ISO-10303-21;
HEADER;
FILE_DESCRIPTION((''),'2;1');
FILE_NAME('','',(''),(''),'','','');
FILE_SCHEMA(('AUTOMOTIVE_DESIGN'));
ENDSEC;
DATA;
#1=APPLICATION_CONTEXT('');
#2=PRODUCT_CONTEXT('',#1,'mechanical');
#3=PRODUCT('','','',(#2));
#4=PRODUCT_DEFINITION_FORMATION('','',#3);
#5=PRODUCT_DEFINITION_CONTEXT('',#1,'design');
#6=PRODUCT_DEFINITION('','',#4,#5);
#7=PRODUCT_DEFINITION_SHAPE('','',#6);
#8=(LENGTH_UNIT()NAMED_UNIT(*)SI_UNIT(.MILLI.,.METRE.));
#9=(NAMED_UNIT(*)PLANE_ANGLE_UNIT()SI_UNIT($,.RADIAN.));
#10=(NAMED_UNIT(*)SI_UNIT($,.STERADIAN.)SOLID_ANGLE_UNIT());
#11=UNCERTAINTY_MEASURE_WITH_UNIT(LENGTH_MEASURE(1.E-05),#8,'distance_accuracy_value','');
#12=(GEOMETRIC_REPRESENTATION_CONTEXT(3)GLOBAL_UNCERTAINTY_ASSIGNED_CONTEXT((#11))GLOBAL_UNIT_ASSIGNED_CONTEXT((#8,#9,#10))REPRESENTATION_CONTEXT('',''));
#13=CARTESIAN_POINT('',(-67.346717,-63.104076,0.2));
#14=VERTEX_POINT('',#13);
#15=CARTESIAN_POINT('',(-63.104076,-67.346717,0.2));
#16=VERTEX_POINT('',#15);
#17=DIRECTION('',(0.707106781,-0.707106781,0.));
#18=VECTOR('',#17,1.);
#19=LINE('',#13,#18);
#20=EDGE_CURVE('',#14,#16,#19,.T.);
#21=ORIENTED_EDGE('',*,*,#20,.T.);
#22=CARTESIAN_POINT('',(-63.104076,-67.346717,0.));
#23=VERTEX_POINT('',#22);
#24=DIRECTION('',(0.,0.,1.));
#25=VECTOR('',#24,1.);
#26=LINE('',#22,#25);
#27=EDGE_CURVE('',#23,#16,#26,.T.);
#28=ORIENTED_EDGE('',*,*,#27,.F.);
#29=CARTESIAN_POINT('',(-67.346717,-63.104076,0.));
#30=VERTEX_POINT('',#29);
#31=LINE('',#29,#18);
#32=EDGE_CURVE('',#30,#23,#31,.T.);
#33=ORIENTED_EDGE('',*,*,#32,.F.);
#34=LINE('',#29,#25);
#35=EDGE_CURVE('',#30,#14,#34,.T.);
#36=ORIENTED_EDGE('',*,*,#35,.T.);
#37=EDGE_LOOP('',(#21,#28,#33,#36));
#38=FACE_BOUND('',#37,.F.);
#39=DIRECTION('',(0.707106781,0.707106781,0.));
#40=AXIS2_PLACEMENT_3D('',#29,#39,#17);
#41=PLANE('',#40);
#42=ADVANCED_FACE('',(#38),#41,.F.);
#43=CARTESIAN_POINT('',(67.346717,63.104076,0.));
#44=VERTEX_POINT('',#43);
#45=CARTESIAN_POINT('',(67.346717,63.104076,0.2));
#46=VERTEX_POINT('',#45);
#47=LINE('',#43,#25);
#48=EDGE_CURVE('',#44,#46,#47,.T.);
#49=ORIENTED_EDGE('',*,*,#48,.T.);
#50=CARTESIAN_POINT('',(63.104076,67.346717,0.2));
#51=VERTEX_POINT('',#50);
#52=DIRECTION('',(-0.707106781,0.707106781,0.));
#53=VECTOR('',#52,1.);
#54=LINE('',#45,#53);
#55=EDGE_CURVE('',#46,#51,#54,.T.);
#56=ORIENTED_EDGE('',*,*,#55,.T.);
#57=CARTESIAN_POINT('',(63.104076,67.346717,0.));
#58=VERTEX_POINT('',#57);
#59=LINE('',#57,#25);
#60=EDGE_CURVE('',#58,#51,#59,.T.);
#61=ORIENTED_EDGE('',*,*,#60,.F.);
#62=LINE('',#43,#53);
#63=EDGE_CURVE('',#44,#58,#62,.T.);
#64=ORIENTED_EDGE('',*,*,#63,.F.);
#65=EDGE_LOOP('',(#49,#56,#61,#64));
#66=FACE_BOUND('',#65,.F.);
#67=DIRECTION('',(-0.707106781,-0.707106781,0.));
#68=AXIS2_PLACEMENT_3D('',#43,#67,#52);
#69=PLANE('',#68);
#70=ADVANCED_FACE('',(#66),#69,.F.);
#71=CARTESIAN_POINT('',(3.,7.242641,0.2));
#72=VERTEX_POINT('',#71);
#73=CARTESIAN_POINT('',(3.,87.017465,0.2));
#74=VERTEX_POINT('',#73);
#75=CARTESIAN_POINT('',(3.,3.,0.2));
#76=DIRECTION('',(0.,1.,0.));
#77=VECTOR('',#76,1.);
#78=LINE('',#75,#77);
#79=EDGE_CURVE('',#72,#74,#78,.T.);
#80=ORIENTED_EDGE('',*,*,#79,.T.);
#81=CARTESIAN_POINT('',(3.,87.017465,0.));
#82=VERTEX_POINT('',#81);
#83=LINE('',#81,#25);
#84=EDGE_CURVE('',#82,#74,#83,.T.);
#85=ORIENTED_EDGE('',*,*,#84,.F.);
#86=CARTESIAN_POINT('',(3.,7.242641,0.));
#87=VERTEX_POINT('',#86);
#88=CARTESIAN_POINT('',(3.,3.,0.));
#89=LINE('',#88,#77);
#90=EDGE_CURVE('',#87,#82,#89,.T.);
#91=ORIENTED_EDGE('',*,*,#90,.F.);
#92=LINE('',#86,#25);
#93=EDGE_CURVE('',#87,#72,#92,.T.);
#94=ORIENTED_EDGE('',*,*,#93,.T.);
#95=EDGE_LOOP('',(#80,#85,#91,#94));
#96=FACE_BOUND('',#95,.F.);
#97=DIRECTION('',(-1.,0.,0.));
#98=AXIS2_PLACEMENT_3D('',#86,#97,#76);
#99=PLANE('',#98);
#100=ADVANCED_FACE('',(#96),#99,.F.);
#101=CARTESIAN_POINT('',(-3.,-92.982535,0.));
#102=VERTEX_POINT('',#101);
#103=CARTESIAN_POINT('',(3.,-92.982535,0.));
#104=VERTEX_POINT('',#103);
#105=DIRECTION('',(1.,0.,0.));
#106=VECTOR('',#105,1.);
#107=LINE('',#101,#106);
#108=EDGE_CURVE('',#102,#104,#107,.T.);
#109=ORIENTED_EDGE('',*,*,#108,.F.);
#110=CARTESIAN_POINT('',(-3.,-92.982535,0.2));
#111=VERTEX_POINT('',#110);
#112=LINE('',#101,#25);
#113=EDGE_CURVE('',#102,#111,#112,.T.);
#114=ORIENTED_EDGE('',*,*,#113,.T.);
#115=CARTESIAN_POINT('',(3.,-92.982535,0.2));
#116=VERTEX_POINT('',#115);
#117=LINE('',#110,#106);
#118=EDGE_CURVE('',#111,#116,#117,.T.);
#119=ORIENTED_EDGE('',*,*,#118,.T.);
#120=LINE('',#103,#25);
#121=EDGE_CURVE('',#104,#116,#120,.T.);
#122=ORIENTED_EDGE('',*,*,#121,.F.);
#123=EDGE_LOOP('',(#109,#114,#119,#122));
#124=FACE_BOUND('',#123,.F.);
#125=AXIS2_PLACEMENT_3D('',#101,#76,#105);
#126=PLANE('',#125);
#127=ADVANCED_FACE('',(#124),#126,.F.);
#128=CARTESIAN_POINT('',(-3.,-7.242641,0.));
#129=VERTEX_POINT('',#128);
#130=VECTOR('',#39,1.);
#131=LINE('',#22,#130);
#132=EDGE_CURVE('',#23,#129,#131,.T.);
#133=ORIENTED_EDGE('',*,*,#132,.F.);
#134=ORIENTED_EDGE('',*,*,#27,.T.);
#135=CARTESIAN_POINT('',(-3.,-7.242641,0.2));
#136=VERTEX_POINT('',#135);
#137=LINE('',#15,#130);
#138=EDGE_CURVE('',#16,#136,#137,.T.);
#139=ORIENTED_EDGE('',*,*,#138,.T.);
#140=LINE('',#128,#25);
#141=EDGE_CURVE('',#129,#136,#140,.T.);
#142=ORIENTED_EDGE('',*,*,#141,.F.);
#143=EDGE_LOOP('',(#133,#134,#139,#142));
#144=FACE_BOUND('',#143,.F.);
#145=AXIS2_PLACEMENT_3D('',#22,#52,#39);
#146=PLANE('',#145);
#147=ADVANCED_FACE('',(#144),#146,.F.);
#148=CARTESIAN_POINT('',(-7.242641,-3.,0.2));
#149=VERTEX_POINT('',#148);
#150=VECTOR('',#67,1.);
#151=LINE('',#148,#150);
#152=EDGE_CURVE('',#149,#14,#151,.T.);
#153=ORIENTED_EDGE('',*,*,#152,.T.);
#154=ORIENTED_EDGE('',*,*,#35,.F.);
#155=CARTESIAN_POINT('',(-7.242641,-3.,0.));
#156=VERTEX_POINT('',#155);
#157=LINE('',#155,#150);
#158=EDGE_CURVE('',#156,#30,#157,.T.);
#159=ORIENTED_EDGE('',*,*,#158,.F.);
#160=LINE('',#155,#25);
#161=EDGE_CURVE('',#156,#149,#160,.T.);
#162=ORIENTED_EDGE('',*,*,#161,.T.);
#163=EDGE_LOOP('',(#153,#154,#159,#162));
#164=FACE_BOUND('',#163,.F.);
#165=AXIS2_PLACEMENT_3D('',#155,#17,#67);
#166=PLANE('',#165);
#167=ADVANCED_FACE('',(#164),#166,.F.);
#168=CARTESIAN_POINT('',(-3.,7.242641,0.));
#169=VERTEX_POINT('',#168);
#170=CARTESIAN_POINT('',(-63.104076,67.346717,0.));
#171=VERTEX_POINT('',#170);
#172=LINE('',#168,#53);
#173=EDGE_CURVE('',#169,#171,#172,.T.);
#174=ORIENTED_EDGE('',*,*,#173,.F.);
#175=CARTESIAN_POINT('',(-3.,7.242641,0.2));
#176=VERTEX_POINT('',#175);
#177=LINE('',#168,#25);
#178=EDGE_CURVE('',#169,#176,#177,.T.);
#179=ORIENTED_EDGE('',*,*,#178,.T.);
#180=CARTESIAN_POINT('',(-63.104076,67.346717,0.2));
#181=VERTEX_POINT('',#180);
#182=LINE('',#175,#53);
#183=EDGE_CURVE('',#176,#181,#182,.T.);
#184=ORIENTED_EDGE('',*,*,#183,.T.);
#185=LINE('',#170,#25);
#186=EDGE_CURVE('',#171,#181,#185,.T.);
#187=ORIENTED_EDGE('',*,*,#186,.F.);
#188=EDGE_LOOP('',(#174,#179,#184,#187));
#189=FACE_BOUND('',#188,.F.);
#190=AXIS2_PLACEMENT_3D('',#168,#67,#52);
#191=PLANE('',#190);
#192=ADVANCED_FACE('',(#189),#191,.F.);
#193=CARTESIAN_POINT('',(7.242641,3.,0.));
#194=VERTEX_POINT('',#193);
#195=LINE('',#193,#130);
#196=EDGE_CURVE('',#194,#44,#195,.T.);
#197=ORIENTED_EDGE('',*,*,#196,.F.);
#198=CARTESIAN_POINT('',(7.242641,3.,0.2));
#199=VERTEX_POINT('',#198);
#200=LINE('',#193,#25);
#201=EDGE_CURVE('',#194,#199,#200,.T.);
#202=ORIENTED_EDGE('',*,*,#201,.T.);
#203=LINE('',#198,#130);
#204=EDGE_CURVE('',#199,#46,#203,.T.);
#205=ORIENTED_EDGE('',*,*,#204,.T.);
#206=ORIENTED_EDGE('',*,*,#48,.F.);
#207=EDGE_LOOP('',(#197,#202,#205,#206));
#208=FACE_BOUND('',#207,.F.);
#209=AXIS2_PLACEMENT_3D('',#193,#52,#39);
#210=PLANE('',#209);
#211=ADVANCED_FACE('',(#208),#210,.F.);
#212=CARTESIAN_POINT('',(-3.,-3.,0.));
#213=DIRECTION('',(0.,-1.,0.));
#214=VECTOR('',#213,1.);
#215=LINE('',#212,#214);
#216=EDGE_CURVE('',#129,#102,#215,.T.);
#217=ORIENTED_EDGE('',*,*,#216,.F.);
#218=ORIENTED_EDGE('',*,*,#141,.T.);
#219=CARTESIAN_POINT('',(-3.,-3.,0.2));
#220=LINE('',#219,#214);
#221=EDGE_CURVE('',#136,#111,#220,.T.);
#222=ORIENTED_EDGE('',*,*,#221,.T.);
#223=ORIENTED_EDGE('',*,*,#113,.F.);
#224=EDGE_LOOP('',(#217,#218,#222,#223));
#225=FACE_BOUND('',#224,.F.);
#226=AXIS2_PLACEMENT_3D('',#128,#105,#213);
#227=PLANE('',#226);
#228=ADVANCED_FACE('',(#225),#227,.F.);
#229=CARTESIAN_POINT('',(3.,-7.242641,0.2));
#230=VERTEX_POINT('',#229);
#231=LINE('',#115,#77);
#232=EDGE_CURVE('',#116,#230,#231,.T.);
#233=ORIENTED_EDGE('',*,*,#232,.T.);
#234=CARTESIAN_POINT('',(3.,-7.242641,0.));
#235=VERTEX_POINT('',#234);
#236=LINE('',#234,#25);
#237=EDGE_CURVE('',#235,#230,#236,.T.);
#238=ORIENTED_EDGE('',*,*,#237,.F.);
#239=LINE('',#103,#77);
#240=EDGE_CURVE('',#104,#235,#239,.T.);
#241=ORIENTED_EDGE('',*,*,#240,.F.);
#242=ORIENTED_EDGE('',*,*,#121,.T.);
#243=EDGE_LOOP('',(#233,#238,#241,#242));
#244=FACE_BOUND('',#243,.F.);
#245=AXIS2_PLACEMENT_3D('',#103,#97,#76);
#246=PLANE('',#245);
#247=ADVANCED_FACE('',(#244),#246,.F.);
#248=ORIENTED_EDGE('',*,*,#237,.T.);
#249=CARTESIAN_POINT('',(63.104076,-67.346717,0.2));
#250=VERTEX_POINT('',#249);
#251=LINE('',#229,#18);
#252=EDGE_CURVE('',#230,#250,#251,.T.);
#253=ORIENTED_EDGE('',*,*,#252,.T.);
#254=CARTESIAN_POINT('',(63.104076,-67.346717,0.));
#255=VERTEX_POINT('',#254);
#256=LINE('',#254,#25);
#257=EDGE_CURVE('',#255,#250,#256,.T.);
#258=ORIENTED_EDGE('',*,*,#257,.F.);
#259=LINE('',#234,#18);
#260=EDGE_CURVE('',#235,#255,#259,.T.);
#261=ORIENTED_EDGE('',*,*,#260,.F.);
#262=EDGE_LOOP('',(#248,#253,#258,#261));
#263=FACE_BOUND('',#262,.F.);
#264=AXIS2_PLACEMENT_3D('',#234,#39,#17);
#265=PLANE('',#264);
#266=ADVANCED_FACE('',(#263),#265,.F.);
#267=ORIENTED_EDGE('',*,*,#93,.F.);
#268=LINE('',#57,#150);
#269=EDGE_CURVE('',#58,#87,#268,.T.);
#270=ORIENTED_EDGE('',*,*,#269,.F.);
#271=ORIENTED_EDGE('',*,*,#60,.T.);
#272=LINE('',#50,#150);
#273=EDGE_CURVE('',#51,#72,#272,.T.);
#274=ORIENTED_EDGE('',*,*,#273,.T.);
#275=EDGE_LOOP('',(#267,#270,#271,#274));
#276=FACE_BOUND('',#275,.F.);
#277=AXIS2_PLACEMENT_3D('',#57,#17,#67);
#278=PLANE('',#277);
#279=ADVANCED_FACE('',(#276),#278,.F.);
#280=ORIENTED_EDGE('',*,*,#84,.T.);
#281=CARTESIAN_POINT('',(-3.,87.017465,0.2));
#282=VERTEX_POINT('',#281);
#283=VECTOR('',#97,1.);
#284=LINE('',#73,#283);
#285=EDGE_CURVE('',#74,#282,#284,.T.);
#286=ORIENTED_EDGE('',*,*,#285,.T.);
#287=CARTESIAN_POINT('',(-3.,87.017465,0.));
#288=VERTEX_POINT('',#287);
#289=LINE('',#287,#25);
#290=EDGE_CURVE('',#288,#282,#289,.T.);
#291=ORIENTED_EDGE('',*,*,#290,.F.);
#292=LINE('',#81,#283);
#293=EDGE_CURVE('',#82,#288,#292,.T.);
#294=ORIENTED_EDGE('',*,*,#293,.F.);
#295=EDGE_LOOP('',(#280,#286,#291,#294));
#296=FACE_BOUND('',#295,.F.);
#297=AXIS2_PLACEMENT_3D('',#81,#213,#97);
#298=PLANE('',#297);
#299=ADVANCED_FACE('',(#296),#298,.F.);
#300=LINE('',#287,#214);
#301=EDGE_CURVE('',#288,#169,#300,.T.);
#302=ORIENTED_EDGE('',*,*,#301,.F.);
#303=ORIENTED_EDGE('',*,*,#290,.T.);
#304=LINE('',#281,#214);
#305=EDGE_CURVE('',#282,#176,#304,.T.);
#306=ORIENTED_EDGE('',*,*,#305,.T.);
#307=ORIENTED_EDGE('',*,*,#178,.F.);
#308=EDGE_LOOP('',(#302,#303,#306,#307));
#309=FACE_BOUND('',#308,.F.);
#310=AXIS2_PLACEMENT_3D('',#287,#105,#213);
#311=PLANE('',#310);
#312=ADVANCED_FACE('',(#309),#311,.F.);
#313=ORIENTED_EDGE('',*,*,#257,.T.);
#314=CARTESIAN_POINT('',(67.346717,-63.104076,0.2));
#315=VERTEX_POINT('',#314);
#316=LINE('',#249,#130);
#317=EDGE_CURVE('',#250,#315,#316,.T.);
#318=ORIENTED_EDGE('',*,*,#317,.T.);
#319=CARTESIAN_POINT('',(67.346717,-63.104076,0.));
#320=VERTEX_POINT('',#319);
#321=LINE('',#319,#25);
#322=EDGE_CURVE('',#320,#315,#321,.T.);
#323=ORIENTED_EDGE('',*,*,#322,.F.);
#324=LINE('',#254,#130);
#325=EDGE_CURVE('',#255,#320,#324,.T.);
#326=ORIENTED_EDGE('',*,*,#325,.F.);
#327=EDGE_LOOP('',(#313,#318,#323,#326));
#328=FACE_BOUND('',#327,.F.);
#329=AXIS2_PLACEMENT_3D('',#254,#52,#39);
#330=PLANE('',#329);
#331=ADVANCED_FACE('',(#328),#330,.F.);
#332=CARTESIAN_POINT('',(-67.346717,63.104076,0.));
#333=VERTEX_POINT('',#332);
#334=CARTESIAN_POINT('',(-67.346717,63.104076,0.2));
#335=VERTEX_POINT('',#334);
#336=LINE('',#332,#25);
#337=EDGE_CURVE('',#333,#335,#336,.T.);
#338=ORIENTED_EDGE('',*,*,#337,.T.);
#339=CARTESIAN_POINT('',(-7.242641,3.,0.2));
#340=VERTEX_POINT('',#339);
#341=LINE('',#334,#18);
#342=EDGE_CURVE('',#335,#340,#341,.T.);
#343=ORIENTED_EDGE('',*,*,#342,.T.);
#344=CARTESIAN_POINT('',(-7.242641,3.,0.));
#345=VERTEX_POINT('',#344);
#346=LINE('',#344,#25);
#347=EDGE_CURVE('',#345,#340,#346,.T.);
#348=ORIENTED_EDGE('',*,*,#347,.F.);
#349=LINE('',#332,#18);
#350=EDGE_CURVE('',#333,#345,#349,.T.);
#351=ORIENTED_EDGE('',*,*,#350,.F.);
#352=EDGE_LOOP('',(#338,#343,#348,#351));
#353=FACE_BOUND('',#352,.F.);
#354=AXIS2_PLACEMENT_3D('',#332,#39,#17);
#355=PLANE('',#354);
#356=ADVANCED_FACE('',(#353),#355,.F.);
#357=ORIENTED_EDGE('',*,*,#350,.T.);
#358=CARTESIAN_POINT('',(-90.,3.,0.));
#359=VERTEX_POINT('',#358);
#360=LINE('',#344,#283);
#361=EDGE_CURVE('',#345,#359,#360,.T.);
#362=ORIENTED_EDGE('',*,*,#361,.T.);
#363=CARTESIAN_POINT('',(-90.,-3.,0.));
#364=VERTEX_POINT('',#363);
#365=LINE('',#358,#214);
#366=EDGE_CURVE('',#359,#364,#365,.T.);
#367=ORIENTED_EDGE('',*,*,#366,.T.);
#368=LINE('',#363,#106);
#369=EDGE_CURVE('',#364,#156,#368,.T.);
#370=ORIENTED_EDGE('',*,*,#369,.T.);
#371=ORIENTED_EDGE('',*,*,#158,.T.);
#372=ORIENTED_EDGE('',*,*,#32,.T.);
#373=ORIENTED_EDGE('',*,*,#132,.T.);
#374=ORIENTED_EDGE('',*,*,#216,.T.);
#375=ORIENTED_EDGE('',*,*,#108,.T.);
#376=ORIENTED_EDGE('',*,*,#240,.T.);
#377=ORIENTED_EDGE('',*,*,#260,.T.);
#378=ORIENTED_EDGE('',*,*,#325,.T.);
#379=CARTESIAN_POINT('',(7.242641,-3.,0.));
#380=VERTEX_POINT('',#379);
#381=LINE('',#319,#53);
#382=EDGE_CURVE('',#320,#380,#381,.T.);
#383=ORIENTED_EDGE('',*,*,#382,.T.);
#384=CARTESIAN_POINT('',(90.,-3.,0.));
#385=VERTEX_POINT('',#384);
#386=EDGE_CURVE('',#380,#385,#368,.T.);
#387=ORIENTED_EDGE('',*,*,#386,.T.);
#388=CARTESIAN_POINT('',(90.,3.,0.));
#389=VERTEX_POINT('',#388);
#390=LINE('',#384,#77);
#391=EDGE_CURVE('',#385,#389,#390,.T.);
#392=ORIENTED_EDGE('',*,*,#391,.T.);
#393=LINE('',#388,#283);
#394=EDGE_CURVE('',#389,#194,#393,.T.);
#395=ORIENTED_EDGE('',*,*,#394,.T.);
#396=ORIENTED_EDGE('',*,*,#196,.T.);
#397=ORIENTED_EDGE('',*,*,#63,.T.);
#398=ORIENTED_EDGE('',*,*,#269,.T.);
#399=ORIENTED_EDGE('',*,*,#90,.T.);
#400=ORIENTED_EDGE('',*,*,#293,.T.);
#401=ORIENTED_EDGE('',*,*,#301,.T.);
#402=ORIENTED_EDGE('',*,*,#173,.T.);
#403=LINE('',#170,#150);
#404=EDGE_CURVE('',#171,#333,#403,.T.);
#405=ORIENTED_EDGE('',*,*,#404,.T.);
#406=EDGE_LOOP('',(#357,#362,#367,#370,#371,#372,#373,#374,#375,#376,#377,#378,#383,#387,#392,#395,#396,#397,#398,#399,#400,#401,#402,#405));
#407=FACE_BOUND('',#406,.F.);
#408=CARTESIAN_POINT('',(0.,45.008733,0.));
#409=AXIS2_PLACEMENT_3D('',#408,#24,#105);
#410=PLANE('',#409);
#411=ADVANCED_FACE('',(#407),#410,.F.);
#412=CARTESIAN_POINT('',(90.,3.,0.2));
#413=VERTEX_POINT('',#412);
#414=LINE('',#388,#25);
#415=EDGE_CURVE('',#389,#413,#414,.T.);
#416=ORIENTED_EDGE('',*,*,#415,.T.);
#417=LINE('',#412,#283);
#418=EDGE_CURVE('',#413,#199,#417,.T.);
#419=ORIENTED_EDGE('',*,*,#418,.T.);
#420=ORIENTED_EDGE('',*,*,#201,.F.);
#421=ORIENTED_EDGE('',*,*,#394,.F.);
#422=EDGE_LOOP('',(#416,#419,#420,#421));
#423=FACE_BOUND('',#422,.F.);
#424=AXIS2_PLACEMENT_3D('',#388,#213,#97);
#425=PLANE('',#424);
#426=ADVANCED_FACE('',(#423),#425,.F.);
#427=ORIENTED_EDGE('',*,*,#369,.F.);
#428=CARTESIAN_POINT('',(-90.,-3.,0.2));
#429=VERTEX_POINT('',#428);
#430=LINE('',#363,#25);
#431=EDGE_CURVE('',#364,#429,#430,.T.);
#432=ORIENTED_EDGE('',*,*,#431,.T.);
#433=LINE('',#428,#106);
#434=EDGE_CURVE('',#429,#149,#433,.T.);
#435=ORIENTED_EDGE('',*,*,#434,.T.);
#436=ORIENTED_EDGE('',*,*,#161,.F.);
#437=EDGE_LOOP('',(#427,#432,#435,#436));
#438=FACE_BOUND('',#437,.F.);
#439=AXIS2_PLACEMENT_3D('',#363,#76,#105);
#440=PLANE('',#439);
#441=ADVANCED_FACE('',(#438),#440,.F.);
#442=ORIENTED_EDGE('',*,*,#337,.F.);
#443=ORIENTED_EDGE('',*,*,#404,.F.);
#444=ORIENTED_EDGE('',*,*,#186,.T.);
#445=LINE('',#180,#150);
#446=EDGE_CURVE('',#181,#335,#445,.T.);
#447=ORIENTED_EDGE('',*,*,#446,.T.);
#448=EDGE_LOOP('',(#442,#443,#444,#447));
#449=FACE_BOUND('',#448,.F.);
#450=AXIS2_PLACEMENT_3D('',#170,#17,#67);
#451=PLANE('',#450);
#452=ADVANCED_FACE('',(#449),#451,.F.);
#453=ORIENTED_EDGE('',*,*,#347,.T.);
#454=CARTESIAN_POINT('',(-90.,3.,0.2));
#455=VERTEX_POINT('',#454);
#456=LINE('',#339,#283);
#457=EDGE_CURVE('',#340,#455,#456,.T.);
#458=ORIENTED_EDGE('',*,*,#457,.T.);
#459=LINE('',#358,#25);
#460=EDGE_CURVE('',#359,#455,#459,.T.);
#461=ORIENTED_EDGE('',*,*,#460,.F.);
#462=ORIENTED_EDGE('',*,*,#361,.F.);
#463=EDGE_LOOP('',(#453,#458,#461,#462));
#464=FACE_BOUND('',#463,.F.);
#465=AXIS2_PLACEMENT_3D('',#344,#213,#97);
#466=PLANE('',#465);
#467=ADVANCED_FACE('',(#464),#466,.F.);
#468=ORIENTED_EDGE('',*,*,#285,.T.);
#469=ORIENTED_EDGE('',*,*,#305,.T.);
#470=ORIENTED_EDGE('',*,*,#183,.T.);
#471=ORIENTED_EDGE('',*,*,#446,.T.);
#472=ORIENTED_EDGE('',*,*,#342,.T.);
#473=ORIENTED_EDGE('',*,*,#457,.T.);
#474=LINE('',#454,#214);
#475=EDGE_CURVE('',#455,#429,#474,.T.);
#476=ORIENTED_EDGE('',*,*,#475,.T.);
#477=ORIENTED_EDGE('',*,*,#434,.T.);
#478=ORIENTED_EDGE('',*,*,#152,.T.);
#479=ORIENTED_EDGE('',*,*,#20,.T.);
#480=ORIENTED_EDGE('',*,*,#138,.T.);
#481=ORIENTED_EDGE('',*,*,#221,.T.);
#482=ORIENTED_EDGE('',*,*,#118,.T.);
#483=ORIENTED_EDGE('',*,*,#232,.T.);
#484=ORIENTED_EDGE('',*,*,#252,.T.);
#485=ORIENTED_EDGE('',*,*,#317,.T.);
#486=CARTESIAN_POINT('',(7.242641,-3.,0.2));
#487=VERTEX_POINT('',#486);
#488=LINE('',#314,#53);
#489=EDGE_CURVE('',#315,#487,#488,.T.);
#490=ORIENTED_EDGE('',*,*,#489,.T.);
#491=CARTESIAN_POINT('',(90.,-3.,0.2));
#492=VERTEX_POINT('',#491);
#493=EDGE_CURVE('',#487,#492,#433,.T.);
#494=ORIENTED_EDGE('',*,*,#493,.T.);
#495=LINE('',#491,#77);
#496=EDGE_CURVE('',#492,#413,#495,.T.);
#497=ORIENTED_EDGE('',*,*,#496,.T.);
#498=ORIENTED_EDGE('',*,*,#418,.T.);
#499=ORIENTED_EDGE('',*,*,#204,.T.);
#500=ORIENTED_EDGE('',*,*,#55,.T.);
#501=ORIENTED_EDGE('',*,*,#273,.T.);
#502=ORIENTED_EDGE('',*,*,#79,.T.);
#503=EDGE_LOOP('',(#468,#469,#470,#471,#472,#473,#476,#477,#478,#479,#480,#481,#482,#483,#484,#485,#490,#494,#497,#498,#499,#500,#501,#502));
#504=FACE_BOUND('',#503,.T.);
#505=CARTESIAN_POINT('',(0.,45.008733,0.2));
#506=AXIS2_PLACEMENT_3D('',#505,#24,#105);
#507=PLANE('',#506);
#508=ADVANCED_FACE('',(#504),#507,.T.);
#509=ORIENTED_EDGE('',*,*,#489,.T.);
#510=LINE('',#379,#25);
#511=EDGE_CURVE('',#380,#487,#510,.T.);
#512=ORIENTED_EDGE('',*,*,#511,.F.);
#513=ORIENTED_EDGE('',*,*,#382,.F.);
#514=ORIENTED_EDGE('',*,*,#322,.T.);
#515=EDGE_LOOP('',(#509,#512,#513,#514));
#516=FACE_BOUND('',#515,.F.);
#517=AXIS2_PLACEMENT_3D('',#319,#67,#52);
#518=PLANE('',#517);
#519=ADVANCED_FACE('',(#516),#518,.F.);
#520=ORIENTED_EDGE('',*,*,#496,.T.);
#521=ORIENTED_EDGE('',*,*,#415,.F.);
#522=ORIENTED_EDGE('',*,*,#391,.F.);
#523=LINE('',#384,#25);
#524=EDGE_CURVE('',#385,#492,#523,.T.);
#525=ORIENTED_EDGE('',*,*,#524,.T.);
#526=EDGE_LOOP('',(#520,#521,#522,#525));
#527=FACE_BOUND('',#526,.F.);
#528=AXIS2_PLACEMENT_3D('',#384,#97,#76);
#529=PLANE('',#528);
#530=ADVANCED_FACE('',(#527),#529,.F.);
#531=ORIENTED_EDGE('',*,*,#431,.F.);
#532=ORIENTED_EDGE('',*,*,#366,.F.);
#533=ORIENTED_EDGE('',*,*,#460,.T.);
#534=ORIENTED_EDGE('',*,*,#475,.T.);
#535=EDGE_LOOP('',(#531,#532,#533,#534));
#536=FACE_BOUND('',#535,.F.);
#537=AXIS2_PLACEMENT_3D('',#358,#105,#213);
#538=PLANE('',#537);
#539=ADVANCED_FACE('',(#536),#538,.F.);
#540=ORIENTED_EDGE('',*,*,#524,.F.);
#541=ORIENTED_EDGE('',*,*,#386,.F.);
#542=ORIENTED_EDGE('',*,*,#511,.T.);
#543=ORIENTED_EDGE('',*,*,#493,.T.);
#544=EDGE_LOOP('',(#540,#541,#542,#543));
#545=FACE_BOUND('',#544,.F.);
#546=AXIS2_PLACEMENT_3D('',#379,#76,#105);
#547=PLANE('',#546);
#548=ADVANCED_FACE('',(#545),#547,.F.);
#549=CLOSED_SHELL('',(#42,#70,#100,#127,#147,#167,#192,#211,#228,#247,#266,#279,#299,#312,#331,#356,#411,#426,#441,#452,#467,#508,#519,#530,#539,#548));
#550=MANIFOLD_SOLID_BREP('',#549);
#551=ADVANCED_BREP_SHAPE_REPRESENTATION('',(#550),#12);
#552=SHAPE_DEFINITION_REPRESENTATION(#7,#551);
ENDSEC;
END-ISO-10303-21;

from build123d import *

# Parameters (mm, degrees)
F1_DEPTH = 0.2


# Not quite as in the source:
# - a feature names something its author has since deleted; it is built from what else it names


with BuildPart() as f1:
    # F0 (on Top) → F1 (new body)
    with BuildSketch(Plane.XY):
        Polygon((3, 87.0174653775), (-3, 87.0174653775), (-3, 7.2426406871), (-3, 3), (3, 3), (3, 7.2426406871), align=None)
        Polygon((-7.2426406871, 3), (-3, 7.2426406871), (-63.1040764009, 67.346717088), (-67.346717088, 63.1040764009), align=None)
        Polygon((-3, 3), (-3, 7.2426406871), (-7.2426406871, 3), align=None)
        Polygon((7.2426406871, 3), (3, 7.2426406871), (3, 3), align=None)
        Polygon((63.1040764009, 67.346717088), (3, 7.2426406871), (7.2426406871, 3), (67.346717088, 63.1040764009), align=None)
        Polygon((3, 3), (-3, 3), (-3, 0), (0, 0), (3, 0), align=None)
        Polygon((-3, 0), (-3, 3), (-7.2426406871, 3), (-90, 3), (-90, -3), (-7.2426406871, -3), (-3, -3), align=None)
        Polygon((7.2426406871, 3), (3, 3), (3, 0), (3, -3), (7.2426406871, -3), (90, -3), (90, 3), align=None)
        Polygon((0, 0), (-3, 0), (-3, -3), (3, -3), (3, 0), align=None)
        Polygon((3, -3), (-3, -3), (-3, -7.2426406871), (-3, -92.9825346225), (3, -92.9825346225), (3, -7.2426406871), align=None)
        Polygon((-3, -7.2426406871), (-3, -3), (-7.2426406871, -3), align=None)
        Polygon((7.2426406871, -3), (3, -3), (3, -7.2426406871), align=None)
        Polygon((-63.1040764009, -67.346717088), (-3, -7.2426406871), (-7.2426406871, -3), (-67.346717088, -63.1040764009), align=None)
        Polygon((7.2426406871, -3), (3, -7.2426406871), (63.1040764009, -67.346717088), (67.346717088, -63.1040764009), align=None)
    extrude(amount=F1_DEPTH)


solid = f1.part
